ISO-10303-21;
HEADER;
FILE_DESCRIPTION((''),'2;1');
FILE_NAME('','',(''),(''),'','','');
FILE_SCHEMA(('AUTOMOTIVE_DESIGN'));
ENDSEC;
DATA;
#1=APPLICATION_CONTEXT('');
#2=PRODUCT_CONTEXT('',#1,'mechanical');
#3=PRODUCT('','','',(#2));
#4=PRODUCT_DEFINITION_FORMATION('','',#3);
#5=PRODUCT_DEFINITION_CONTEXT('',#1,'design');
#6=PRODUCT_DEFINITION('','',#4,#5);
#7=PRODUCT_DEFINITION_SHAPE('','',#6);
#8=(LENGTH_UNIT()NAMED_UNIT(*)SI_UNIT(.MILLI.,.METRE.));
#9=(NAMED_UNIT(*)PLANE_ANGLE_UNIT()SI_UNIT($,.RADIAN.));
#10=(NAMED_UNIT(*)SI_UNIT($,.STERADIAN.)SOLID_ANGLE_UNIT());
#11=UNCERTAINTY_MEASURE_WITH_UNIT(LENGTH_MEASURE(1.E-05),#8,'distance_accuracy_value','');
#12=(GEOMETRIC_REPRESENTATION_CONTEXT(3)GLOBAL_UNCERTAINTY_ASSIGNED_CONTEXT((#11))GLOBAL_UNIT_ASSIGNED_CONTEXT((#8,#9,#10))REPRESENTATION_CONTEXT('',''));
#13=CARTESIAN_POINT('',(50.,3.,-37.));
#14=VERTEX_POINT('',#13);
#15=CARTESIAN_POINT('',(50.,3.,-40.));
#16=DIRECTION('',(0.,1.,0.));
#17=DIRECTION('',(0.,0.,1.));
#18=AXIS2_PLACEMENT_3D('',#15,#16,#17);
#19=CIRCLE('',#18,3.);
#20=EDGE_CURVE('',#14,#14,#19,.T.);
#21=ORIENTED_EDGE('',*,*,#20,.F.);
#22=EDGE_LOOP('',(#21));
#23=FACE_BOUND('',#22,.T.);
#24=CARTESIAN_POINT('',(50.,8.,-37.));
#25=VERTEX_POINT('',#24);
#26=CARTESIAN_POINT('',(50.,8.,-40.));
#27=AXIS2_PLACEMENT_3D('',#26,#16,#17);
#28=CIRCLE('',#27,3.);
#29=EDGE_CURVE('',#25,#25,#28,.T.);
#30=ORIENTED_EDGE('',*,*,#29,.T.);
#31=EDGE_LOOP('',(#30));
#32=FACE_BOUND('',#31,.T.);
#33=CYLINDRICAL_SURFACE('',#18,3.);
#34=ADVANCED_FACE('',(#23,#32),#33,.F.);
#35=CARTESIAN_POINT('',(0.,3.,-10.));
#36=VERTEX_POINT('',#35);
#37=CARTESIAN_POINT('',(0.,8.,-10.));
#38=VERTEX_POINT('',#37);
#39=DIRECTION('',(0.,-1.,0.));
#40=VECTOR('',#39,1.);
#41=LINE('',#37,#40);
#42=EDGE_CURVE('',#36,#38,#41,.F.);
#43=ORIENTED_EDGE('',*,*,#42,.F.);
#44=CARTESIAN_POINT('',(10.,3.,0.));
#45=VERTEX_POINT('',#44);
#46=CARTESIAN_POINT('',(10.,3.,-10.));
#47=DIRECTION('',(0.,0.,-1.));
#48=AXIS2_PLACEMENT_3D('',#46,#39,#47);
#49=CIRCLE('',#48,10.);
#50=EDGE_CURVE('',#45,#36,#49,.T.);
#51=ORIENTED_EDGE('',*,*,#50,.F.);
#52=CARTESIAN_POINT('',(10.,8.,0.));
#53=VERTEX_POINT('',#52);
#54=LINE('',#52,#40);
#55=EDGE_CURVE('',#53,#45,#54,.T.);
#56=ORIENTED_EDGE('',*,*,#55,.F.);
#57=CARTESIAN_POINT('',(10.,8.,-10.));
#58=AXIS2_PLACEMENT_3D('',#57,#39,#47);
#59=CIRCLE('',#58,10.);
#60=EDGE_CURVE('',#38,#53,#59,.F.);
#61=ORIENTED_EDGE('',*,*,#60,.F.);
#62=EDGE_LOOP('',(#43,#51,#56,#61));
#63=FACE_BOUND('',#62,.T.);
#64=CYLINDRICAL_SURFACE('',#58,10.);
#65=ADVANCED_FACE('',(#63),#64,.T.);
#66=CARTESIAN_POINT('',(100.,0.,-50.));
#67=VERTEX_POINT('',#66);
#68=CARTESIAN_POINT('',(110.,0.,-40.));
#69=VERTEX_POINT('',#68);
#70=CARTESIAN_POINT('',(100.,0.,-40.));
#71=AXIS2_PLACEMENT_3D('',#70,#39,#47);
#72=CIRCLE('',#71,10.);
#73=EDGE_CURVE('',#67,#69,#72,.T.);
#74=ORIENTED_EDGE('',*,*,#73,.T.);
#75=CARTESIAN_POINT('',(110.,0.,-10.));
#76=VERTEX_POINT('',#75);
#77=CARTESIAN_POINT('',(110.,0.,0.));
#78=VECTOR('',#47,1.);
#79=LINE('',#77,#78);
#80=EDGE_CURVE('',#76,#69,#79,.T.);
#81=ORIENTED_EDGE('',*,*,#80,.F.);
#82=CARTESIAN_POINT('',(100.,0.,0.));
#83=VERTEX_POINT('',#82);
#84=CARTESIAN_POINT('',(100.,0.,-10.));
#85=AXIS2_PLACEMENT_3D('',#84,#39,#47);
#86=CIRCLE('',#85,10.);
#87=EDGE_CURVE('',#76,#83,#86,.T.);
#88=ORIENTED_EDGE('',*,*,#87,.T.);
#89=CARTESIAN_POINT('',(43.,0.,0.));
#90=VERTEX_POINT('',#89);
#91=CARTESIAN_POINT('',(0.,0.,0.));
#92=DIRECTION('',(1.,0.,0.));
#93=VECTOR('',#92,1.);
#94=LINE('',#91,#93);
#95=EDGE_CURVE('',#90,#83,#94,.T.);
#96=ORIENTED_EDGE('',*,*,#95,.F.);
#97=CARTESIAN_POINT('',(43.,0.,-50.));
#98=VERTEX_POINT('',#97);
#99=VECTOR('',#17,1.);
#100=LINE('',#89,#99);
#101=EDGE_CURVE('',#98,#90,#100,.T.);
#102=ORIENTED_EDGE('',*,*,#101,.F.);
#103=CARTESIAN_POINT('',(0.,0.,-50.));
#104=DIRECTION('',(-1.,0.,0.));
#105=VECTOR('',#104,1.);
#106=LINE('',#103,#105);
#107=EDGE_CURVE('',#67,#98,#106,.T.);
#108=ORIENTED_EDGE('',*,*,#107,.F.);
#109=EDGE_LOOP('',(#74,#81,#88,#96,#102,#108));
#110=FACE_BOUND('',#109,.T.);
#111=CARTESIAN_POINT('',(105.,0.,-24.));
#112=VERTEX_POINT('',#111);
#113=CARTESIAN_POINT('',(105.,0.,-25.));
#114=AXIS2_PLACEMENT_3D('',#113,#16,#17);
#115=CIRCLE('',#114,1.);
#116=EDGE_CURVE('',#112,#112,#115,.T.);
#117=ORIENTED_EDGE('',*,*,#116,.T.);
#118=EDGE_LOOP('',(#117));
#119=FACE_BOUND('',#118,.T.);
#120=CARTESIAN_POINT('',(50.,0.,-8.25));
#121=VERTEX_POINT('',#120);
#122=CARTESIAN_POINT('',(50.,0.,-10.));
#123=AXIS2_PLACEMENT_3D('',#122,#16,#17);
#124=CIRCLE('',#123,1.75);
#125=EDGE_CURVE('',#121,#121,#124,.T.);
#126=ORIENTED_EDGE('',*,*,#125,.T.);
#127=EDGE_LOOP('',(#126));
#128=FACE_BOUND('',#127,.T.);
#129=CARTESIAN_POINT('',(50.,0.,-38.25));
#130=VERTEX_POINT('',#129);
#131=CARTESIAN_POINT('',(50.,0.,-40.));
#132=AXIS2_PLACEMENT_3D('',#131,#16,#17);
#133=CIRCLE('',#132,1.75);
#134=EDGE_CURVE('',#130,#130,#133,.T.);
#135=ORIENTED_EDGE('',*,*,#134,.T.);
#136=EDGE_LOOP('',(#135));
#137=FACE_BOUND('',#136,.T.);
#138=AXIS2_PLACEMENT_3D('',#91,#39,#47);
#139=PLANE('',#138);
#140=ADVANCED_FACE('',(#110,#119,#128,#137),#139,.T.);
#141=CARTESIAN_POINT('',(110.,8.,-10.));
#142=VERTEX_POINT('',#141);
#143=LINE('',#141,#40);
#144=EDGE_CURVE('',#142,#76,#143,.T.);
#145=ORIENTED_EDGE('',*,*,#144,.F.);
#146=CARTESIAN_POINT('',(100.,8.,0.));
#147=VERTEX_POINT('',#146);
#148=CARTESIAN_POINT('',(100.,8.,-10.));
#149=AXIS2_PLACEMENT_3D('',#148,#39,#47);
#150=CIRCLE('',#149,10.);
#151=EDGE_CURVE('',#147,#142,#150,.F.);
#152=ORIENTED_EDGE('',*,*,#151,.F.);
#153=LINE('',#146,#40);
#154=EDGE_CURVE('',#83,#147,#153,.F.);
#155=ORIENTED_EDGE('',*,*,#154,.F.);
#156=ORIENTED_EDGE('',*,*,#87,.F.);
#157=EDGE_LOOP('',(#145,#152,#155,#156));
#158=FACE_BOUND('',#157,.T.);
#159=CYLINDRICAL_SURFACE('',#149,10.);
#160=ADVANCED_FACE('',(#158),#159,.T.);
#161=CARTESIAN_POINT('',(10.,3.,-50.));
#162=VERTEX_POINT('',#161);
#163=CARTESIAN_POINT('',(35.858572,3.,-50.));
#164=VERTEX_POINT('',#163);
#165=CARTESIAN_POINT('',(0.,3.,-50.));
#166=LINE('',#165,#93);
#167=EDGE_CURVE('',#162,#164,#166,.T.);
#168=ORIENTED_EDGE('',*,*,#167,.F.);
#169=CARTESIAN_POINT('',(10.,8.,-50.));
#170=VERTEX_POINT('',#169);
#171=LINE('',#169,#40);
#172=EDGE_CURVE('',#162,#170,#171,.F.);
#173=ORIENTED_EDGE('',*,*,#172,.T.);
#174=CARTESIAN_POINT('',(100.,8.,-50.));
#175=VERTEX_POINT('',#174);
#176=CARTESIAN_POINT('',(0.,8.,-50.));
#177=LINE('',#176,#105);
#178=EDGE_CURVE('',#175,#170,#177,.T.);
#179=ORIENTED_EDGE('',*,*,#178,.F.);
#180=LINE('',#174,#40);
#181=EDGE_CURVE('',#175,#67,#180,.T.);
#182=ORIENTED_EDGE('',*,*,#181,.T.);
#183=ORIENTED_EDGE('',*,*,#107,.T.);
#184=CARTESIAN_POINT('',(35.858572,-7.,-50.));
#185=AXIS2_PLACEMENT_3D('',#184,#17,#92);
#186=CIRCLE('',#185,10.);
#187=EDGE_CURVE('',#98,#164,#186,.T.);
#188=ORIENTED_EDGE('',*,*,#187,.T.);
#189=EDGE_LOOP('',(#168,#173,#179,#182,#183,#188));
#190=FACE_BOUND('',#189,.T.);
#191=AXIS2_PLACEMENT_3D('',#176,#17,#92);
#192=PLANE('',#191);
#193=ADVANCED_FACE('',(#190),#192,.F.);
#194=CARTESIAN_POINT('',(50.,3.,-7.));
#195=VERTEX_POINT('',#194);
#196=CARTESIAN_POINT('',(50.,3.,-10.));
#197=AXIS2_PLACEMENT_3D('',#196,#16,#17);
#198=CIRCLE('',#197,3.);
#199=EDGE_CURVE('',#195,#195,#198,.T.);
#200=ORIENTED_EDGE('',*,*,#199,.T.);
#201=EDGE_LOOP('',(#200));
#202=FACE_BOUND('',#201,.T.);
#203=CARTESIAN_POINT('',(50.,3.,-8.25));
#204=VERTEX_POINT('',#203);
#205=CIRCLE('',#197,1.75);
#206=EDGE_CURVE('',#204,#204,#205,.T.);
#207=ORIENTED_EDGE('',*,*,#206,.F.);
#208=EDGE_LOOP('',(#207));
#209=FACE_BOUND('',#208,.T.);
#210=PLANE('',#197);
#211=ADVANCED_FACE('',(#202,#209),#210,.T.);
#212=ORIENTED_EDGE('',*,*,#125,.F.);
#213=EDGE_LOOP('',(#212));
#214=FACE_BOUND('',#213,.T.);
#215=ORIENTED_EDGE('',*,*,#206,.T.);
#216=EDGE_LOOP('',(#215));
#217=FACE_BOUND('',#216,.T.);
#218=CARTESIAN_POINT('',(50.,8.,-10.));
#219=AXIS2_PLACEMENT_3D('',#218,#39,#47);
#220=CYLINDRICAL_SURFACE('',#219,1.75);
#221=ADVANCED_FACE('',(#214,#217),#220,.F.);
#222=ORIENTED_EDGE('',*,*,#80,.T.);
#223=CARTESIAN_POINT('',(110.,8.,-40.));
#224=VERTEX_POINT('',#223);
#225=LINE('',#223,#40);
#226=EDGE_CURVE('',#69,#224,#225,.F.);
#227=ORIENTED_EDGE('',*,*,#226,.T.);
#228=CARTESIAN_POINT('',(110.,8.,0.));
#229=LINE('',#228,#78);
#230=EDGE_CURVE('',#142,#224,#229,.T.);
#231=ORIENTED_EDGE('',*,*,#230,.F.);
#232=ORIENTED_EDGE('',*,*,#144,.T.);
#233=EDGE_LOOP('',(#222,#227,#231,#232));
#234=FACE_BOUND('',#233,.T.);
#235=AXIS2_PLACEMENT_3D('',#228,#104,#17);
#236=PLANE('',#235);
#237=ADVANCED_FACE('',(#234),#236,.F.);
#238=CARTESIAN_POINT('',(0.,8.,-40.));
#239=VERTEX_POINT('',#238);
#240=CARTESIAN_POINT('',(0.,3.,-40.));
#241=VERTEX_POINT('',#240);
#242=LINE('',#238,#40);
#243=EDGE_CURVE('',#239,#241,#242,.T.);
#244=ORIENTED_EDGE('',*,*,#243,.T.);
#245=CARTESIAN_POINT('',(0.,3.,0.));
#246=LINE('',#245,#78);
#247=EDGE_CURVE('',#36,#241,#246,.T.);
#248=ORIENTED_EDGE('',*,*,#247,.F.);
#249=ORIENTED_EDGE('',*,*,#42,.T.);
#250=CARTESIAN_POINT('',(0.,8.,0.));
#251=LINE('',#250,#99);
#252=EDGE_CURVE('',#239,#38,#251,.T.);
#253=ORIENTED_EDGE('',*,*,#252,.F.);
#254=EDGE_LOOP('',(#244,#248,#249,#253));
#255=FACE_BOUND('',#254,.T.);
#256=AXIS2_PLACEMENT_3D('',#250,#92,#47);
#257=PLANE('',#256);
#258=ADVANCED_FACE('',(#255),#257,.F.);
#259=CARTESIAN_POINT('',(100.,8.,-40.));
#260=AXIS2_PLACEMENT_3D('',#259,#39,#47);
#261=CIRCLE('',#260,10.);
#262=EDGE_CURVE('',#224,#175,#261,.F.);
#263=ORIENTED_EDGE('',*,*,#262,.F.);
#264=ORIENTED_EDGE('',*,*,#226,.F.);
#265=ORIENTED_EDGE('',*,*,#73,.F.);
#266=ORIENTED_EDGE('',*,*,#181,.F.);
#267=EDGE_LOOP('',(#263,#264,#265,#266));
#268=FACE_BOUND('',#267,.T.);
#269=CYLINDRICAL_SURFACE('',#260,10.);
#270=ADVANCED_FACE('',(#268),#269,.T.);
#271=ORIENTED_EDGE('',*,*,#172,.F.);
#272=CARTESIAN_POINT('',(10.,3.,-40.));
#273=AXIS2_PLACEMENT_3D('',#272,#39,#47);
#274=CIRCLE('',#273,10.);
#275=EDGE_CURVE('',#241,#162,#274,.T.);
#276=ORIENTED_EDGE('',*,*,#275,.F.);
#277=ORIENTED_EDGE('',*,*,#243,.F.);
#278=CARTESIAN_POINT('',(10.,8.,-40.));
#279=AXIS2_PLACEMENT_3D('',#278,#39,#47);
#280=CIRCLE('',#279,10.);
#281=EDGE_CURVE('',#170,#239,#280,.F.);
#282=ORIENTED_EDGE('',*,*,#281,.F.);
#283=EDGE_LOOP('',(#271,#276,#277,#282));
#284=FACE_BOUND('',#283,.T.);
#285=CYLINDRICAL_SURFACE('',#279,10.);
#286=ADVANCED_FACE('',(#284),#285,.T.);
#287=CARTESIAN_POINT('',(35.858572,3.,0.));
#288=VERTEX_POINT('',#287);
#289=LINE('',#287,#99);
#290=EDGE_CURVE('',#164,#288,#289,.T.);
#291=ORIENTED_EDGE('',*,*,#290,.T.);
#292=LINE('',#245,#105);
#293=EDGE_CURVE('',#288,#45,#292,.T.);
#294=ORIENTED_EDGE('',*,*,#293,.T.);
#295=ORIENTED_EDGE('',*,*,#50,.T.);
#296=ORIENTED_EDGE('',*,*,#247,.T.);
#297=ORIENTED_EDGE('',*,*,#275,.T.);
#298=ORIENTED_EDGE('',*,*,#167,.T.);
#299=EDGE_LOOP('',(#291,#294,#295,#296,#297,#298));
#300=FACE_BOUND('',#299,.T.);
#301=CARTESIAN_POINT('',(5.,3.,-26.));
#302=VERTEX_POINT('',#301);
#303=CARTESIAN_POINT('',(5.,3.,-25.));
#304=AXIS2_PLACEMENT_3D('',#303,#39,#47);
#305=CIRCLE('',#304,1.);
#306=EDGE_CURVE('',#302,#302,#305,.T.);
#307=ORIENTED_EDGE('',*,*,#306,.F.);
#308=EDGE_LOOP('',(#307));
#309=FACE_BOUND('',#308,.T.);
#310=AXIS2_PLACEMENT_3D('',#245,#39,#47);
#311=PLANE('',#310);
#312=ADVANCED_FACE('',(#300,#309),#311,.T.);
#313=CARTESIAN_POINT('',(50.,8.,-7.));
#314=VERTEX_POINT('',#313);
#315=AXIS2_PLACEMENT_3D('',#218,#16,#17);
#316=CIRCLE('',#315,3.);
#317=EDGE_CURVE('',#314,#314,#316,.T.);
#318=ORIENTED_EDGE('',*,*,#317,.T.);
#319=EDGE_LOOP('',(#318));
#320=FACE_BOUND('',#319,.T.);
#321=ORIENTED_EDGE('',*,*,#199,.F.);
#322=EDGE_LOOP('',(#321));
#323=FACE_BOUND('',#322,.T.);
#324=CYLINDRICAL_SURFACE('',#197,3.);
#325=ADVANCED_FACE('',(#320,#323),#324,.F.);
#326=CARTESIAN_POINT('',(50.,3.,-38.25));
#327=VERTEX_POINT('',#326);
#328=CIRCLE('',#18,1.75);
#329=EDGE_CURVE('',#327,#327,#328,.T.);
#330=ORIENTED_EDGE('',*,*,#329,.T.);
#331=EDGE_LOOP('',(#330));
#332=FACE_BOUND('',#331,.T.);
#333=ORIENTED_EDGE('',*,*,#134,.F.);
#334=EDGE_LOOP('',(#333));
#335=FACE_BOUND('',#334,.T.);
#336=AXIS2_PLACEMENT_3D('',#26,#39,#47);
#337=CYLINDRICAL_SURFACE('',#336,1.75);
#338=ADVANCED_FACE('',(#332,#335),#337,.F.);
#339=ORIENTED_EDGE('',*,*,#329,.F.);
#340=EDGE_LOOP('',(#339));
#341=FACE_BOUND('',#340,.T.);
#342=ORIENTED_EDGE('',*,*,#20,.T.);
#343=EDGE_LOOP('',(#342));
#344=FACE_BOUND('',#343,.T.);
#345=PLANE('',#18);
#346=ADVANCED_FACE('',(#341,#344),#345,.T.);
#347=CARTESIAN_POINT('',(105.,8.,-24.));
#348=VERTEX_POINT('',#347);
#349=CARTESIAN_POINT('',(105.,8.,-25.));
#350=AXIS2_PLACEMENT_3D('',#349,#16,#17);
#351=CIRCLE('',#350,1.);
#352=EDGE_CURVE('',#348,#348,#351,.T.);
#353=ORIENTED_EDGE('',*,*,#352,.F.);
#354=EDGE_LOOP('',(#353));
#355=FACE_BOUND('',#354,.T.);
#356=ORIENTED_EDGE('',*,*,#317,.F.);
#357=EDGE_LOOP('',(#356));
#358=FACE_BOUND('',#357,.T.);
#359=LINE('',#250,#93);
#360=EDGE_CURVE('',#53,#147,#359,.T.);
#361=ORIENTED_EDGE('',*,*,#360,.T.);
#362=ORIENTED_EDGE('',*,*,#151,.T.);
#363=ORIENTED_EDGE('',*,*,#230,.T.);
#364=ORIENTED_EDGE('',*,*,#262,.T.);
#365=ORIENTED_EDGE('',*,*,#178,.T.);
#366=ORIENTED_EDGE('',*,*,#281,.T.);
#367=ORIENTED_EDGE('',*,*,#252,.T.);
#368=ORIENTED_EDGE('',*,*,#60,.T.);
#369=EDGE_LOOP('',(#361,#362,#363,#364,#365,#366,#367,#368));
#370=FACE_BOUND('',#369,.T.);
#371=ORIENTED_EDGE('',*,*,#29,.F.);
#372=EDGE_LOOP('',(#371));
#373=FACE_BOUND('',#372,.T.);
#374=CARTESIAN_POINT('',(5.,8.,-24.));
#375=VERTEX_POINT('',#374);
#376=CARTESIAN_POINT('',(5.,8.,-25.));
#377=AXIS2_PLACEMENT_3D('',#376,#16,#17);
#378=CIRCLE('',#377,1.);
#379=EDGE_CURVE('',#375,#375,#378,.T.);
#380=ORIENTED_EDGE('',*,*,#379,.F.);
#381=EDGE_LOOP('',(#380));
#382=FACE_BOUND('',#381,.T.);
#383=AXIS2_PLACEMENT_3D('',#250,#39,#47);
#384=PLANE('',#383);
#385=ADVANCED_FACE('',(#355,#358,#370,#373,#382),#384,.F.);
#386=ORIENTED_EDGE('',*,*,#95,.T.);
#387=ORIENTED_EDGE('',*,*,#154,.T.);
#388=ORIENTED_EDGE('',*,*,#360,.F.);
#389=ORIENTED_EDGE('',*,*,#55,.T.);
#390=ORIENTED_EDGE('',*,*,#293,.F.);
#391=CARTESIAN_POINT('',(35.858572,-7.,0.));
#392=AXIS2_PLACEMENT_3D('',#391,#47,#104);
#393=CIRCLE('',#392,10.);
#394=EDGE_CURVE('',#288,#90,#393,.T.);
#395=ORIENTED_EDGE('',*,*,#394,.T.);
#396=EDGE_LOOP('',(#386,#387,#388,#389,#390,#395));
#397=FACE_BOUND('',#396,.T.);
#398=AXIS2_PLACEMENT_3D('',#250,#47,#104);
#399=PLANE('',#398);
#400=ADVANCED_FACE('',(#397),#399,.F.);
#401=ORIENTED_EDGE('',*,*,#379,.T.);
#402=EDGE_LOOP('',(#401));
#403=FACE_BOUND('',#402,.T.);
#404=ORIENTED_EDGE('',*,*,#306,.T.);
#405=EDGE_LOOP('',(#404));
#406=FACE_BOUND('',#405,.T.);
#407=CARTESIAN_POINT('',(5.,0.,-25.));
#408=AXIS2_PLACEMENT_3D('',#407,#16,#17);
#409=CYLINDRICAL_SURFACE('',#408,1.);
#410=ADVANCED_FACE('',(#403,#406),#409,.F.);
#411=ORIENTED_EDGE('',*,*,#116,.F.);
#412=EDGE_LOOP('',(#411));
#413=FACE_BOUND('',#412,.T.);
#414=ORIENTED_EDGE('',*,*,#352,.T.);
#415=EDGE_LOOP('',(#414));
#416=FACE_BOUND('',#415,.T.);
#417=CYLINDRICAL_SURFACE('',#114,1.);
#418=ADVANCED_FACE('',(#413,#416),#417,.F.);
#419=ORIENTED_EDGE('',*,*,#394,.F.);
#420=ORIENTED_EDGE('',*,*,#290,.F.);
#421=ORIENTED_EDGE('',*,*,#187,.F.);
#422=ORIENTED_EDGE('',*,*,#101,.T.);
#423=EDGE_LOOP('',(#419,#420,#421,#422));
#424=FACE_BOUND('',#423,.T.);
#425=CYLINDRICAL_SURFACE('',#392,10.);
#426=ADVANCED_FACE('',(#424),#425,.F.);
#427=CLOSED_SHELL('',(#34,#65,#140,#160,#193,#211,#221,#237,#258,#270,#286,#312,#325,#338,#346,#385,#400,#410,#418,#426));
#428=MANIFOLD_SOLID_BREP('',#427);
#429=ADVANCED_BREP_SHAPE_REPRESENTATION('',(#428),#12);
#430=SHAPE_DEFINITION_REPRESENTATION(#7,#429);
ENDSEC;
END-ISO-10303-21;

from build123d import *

# Parameters (mm, degrees)
SKETCH1_W           = 110
SKETCH1_H           = 50
SKETCH1_R           = 1.75
BOSS_EXTRUDE1_DEPTH = 8
SKETCH2_W           = 43
SKETCH2_H           = 50
CUT_EXTRUDE1_DEPTH  = 3
SKETCH3_R           = 3
CUT_EXTRUDE2_DEPTH  = 5
FILLET1_R           = 10
FILLET2_R           = 10
SKETCH4_R           = 1
CUT_EXTRUDE3_DEPTH  = 122.095004026


with BuildPart() as part:
    # Sketch1 → Boss-Extrude1 (new body)
    with BuildSketch(Plane(origin=(0, 0, 0), x_dir=(1, 0, 0), z_dir=(0, 1, 0))):
        with Locations((55, 25)):
            Rectangle(SKETCH1_W, SKETCH1_H)
        with Locations(Location((50, 40, 0), (0, 0, 270))):
            Circle(SKETCH1_R, mode=Mode.SUBTRACT)
        with Locations(Location((50, 10, 0), (0, 0, 270))):
            Circle(SKETCH1_R, mode=Mode.SUBTRACT)
    extrude(amount=BOSS_EXTRUDE1_DEPTH)

    # Sketch2 → Cut-Extrude1 (cut)
    with BuildSketch(Plane.XZ):
        with Locations((21.5, -25)):
            Rectangle(SKETCH2_W, SKETCH2_H)
    extrude(amount=-CUT_EXTRUDE1_DEPTH, mode=Mode.SUBTRACT)

    # Sketch3 → Cut-Extrude2 (cut)
    with BuildSketch(Plane(origin=(0, 8, 0), x_dir=(1, 0, 0), z_dir=(0, 1, 0))):
        with Locations(Location((50, 40, 0), (0, 0, 270))):
            Circle(SKETCH3_R)
        with Locations(Location((50, 10, 0), (0, 0, 270))):
            Circle(SKETCH3_R)
    extrude(amount=-CUT_EXTRUDE2_DEPTH, mode=Mode.SUBTRACT)

    # Fillet1
    # the kernel refuses this fillet: 10 mm, written as the material it adds along each edge
    with BuildSketch(Plane(origin=(43, 3, 0), x_dir=(-1, 0, 0), z_dir=(0, 0, -1))) as fillet1_piece_1:
        with BuildLine():
            CenterArc((7.141428429, -10), FILLET1_R, 90, 45.572995999)
            Line((0, -3), (-0.142828569, -2.86))
            ThreePointArc((-0.142828569, -2.86), (-0.2, -1.5), (-0.2, 0))
            Line((-0.2, 0), (0, 0.2))
            Line((0, 0.2), (7.141428429, 0.2))
            Line((7.141428429, 0.2), (7.141428429, 0))
        make_face()
    extrude(amount=50)

    # Fillet2
    fillet2_edges = [part.edges().sort_by_distance(p)[0] for p in [
        (0, 5.5, -50),
        (110, 4, -50),
        (110, 4, 0),
        (0, 5.5, 0),
    ]]
    fillet(fillet2_edges, radius=FILLET2_R)

    # Sketch4 → Cut-Extrude3 (cut, through all)
    with BuildSketch(Plane(origin=(0, 8, 0), x_dir=(1, 0, 0), z_dir=(0, 1, 0))):
        with Locations(Location((5, 25, 0), (0, 0, 270))):
            Circle(SKETCH4_R)
        with Locations(Location((105, 25, 0), (0, 0, 270))):
            Circle(SKETCH4_R)
    extrude(amount=-CUT_EXTRUDE3_DEPTH, mode=Mode.SUBTRACT)


solid = part.part
